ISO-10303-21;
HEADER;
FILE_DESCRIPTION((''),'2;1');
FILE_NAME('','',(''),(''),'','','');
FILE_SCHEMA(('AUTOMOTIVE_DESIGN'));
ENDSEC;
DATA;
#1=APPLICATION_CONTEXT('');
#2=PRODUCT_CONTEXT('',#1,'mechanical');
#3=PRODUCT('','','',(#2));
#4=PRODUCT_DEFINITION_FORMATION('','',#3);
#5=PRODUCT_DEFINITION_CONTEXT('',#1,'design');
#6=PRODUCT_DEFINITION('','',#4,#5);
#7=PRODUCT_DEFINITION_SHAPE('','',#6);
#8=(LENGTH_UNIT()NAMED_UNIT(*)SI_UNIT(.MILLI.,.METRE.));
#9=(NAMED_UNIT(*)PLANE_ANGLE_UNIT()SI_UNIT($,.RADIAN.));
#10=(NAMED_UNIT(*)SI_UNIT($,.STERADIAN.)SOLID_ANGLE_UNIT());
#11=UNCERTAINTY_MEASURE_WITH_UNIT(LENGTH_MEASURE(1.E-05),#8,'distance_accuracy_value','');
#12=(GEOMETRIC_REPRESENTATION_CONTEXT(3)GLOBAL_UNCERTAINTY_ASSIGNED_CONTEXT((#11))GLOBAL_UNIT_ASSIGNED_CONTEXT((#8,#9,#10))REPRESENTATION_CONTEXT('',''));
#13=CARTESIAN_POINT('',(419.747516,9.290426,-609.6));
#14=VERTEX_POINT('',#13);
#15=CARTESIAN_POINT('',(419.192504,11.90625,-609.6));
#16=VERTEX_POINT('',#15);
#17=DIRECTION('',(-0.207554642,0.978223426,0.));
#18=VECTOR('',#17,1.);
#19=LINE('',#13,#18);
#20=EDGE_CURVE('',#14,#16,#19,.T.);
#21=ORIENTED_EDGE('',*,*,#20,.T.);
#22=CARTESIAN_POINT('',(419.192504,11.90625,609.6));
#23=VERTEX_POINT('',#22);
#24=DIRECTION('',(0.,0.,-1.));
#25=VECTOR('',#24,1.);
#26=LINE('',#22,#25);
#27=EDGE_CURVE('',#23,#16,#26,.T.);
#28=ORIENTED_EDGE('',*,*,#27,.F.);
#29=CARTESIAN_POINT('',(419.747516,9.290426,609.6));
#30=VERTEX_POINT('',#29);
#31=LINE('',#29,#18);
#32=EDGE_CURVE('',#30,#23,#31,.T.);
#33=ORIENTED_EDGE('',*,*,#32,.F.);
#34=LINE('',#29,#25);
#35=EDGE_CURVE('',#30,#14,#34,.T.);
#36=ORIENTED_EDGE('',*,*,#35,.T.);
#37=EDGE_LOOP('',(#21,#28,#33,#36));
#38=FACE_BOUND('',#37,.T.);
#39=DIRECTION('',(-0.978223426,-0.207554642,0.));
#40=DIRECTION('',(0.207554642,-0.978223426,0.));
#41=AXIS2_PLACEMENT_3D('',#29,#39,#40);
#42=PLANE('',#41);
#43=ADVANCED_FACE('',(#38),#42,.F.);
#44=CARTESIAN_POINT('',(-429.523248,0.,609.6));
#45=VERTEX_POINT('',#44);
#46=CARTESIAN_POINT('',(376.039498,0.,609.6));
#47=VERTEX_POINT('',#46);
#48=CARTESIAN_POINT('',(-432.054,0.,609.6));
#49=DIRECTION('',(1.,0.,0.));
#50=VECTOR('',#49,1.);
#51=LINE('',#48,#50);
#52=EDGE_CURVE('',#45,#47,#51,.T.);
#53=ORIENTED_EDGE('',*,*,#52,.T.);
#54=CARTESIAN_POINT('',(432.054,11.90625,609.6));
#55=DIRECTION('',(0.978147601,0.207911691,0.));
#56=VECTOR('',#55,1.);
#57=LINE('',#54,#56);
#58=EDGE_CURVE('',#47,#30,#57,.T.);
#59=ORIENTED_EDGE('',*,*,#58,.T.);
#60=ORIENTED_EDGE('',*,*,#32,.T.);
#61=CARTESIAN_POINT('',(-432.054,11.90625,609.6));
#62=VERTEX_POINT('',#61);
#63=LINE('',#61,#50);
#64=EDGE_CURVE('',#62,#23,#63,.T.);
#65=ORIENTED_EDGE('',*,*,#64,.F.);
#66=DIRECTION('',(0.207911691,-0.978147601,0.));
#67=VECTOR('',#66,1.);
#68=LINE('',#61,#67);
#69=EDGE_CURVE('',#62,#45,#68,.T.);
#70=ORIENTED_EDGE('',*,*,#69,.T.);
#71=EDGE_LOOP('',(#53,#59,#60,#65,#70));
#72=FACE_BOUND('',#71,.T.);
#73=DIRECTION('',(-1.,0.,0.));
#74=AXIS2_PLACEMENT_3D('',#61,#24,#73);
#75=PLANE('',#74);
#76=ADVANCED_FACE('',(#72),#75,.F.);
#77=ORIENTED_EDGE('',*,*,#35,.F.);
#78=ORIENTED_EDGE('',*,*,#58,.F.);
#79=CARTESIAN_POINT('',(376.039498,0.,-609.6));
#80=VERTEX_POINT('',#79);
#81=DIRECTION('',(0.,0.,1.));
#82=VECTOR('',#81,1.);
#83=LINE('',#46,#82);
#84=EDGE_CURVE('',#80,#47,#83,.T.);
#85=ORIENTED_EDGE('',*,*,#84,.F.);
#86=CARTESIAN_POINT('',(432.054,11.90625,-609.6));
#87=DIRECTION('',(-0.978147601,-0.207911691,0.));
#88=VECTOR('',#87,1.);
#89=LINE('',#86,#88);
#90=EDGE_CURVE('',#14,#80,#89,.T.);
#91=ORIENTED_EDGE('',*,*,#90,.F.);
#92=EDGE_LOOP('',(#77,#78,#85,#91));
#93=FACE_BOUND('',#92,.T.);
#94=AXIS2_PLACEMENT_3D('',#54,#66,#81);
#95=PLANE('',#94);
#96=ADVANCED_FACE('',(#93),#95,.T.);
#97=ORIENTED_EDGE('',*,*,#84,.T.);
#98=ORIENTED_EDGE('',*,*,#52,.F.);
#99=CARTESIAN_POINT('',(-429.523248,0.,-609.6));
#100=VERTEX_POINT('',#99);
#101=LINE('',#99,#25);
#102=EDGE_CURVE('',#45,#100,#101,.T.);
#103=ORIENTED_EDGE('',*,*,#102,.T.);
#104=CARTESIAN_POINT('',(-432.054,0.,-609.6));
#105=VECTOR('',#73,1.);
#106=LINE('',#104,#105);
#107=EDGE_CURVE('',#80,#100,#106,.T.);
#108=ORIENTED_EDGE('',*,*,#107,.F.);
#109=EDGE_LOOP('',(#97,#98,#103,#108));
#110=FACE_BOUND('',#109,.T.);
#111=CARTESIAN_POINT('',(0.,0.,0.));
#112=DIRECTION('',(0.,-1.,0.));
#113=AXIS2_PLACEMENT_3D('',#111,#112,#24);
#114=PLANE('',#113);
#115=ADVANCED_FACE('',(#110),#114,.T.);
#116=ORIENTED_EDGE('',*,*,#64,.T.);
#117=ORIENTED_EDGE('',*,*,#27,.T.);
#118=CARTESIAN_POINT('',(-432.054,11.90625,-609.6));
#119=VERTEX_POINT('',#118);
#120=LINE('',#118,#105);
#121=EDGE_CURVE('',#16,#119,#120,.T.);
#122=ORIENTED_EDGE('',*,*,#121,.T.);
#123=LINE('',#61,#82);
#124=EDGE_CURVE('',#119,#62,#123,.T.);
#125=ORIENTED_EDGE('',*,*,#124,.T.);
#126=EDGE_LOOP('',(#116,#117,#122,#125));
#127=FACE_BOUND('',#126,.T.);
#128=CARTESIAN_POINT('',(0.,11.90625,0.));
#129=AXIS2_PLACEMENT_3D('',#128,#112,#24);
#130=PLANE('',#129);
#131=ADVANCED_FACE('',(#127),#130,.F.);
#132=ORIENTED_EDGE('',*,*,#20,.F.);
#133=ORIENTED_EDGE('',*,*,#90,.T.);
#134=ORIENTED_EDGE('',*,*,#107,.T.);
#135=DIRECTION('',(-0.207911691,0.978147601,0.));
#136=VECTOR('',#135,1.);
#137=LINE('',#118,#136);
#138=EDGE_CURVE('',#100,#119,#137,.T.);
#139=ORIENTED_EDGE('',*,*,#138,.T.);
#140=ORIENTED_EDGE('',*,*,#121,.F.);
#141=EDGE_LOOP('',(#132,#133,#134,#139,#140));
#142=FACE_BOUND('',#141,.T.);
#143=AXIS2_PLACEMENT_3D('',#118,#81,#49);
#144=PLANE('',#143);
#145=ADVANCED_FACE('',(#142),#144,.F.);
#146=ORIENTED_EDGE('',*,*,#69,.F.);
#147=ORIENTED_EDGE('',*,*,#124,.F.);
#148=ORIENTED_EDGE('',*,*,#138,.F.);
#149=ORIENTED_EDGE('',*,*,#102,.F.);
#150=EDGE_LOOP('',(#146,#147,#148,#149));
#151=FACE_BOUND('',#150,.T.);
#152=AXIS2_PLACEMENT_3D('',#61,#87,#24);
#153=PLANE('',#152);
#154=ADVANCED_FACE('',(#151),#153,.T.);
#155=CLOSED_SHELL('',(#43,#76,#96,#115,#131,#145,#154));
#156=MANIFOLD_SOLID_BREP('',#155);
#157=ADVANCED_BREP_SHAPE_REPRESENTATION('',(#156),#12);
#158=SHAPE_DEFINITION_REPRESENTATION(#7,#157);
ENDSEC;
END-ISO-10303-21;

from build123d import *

# Parameters (mm, degrees)
SKETCH2_W              = 864.108
SKETCH2_H              = 1219.2
BOSS_EXTRUDE1_DEPTH    = 11.90625
CHAMFER6_SIZE2         = 2.530751562
CHAMFER6_SIZE          = 11.90625
CHAMFER7_SIZE2         = 11.90625
CHAMFER7_SIZE          = 56.014502241
CUT_EXTRUDE1_START     = 412.535124419
CUT_EXTRUDE1_OUTLINE_W = 6
CUT_EXTRUDE1_OUTLINE_H = 1222
CUT_EXTRUDE1_DEPTH     = 12.581416982


# Read off the part's stored shape, not the designer's step: Cut-Extrude1
with BuildPart() as part:
    # Sketch2 → Boss-Extrude1 (new body)
    with BuildSketch(Plane(origin=(0, 0, 0), x_dir=(1, 0, 0), z_dir=(0, 1, 0))):
        Rectangle(SKETCH2_W, SKETCH2_H)
    extrude(amount=BOSS_EXTRUDE1_DEPTH)

    # Chamfer6
    chamfer6_edges = [part.edges().sort_by_distance(p)[0] for p in [
        (-432.054, 0, 0),
    ]]
    chamfer6_side = [part.faces().sort_by_distance(p)[0] for p in [
        (-432.054, 0.050615031, 0),
    ]]
    chamfer(chamfer6_edges, length=CHAMFER6_SIZE - 0.0001, length2=CHAMFER6_SIZE2 - 0.0001, reference=chamfer6_side[0])  # a hair under: the kernel refuses the full size

    # Chamfer7
    chamfer7_edges = [part.edges().sort_by_distance(p)[0] for p in [
        (432.054, 0, 0),
    ]]
    chamfer7_side = [part.faces().sort_by_distance(p)[0] for p in [
        (431.815875, 0, 0),
    ]]
    chamfer(chamfer7_edges, length=CHAMFER7_SIZE - 0.0001, length2=CHAMFER7_SIZE2 - 0.0001, reference=chamfer7_side[0])  # a hair under: the kernel refuses the full size

    # Cut-Extrude1 outline → Cut-Extrude1 (cut)
    with BuildSketch(Plane(origin=(0, 0, 0), x_dir=(-0.20755464226928605, 0.978223425640824, 0), z_dir=(0.9782234256408241, 0.20755464226928602, 0)).offset(CUT_EXTRUDE1_START)):
        with Locations((-77, 0)):
            Rectangle(CUT_EXTRUDE1_OUTLINE_W, CUT_EXTRUDE1_OUTLINE_H)
    extrude(amount=CUT_EXTRUDE1_DEPTH, mode=Mode.SUBTRACT)


solid = part.part
